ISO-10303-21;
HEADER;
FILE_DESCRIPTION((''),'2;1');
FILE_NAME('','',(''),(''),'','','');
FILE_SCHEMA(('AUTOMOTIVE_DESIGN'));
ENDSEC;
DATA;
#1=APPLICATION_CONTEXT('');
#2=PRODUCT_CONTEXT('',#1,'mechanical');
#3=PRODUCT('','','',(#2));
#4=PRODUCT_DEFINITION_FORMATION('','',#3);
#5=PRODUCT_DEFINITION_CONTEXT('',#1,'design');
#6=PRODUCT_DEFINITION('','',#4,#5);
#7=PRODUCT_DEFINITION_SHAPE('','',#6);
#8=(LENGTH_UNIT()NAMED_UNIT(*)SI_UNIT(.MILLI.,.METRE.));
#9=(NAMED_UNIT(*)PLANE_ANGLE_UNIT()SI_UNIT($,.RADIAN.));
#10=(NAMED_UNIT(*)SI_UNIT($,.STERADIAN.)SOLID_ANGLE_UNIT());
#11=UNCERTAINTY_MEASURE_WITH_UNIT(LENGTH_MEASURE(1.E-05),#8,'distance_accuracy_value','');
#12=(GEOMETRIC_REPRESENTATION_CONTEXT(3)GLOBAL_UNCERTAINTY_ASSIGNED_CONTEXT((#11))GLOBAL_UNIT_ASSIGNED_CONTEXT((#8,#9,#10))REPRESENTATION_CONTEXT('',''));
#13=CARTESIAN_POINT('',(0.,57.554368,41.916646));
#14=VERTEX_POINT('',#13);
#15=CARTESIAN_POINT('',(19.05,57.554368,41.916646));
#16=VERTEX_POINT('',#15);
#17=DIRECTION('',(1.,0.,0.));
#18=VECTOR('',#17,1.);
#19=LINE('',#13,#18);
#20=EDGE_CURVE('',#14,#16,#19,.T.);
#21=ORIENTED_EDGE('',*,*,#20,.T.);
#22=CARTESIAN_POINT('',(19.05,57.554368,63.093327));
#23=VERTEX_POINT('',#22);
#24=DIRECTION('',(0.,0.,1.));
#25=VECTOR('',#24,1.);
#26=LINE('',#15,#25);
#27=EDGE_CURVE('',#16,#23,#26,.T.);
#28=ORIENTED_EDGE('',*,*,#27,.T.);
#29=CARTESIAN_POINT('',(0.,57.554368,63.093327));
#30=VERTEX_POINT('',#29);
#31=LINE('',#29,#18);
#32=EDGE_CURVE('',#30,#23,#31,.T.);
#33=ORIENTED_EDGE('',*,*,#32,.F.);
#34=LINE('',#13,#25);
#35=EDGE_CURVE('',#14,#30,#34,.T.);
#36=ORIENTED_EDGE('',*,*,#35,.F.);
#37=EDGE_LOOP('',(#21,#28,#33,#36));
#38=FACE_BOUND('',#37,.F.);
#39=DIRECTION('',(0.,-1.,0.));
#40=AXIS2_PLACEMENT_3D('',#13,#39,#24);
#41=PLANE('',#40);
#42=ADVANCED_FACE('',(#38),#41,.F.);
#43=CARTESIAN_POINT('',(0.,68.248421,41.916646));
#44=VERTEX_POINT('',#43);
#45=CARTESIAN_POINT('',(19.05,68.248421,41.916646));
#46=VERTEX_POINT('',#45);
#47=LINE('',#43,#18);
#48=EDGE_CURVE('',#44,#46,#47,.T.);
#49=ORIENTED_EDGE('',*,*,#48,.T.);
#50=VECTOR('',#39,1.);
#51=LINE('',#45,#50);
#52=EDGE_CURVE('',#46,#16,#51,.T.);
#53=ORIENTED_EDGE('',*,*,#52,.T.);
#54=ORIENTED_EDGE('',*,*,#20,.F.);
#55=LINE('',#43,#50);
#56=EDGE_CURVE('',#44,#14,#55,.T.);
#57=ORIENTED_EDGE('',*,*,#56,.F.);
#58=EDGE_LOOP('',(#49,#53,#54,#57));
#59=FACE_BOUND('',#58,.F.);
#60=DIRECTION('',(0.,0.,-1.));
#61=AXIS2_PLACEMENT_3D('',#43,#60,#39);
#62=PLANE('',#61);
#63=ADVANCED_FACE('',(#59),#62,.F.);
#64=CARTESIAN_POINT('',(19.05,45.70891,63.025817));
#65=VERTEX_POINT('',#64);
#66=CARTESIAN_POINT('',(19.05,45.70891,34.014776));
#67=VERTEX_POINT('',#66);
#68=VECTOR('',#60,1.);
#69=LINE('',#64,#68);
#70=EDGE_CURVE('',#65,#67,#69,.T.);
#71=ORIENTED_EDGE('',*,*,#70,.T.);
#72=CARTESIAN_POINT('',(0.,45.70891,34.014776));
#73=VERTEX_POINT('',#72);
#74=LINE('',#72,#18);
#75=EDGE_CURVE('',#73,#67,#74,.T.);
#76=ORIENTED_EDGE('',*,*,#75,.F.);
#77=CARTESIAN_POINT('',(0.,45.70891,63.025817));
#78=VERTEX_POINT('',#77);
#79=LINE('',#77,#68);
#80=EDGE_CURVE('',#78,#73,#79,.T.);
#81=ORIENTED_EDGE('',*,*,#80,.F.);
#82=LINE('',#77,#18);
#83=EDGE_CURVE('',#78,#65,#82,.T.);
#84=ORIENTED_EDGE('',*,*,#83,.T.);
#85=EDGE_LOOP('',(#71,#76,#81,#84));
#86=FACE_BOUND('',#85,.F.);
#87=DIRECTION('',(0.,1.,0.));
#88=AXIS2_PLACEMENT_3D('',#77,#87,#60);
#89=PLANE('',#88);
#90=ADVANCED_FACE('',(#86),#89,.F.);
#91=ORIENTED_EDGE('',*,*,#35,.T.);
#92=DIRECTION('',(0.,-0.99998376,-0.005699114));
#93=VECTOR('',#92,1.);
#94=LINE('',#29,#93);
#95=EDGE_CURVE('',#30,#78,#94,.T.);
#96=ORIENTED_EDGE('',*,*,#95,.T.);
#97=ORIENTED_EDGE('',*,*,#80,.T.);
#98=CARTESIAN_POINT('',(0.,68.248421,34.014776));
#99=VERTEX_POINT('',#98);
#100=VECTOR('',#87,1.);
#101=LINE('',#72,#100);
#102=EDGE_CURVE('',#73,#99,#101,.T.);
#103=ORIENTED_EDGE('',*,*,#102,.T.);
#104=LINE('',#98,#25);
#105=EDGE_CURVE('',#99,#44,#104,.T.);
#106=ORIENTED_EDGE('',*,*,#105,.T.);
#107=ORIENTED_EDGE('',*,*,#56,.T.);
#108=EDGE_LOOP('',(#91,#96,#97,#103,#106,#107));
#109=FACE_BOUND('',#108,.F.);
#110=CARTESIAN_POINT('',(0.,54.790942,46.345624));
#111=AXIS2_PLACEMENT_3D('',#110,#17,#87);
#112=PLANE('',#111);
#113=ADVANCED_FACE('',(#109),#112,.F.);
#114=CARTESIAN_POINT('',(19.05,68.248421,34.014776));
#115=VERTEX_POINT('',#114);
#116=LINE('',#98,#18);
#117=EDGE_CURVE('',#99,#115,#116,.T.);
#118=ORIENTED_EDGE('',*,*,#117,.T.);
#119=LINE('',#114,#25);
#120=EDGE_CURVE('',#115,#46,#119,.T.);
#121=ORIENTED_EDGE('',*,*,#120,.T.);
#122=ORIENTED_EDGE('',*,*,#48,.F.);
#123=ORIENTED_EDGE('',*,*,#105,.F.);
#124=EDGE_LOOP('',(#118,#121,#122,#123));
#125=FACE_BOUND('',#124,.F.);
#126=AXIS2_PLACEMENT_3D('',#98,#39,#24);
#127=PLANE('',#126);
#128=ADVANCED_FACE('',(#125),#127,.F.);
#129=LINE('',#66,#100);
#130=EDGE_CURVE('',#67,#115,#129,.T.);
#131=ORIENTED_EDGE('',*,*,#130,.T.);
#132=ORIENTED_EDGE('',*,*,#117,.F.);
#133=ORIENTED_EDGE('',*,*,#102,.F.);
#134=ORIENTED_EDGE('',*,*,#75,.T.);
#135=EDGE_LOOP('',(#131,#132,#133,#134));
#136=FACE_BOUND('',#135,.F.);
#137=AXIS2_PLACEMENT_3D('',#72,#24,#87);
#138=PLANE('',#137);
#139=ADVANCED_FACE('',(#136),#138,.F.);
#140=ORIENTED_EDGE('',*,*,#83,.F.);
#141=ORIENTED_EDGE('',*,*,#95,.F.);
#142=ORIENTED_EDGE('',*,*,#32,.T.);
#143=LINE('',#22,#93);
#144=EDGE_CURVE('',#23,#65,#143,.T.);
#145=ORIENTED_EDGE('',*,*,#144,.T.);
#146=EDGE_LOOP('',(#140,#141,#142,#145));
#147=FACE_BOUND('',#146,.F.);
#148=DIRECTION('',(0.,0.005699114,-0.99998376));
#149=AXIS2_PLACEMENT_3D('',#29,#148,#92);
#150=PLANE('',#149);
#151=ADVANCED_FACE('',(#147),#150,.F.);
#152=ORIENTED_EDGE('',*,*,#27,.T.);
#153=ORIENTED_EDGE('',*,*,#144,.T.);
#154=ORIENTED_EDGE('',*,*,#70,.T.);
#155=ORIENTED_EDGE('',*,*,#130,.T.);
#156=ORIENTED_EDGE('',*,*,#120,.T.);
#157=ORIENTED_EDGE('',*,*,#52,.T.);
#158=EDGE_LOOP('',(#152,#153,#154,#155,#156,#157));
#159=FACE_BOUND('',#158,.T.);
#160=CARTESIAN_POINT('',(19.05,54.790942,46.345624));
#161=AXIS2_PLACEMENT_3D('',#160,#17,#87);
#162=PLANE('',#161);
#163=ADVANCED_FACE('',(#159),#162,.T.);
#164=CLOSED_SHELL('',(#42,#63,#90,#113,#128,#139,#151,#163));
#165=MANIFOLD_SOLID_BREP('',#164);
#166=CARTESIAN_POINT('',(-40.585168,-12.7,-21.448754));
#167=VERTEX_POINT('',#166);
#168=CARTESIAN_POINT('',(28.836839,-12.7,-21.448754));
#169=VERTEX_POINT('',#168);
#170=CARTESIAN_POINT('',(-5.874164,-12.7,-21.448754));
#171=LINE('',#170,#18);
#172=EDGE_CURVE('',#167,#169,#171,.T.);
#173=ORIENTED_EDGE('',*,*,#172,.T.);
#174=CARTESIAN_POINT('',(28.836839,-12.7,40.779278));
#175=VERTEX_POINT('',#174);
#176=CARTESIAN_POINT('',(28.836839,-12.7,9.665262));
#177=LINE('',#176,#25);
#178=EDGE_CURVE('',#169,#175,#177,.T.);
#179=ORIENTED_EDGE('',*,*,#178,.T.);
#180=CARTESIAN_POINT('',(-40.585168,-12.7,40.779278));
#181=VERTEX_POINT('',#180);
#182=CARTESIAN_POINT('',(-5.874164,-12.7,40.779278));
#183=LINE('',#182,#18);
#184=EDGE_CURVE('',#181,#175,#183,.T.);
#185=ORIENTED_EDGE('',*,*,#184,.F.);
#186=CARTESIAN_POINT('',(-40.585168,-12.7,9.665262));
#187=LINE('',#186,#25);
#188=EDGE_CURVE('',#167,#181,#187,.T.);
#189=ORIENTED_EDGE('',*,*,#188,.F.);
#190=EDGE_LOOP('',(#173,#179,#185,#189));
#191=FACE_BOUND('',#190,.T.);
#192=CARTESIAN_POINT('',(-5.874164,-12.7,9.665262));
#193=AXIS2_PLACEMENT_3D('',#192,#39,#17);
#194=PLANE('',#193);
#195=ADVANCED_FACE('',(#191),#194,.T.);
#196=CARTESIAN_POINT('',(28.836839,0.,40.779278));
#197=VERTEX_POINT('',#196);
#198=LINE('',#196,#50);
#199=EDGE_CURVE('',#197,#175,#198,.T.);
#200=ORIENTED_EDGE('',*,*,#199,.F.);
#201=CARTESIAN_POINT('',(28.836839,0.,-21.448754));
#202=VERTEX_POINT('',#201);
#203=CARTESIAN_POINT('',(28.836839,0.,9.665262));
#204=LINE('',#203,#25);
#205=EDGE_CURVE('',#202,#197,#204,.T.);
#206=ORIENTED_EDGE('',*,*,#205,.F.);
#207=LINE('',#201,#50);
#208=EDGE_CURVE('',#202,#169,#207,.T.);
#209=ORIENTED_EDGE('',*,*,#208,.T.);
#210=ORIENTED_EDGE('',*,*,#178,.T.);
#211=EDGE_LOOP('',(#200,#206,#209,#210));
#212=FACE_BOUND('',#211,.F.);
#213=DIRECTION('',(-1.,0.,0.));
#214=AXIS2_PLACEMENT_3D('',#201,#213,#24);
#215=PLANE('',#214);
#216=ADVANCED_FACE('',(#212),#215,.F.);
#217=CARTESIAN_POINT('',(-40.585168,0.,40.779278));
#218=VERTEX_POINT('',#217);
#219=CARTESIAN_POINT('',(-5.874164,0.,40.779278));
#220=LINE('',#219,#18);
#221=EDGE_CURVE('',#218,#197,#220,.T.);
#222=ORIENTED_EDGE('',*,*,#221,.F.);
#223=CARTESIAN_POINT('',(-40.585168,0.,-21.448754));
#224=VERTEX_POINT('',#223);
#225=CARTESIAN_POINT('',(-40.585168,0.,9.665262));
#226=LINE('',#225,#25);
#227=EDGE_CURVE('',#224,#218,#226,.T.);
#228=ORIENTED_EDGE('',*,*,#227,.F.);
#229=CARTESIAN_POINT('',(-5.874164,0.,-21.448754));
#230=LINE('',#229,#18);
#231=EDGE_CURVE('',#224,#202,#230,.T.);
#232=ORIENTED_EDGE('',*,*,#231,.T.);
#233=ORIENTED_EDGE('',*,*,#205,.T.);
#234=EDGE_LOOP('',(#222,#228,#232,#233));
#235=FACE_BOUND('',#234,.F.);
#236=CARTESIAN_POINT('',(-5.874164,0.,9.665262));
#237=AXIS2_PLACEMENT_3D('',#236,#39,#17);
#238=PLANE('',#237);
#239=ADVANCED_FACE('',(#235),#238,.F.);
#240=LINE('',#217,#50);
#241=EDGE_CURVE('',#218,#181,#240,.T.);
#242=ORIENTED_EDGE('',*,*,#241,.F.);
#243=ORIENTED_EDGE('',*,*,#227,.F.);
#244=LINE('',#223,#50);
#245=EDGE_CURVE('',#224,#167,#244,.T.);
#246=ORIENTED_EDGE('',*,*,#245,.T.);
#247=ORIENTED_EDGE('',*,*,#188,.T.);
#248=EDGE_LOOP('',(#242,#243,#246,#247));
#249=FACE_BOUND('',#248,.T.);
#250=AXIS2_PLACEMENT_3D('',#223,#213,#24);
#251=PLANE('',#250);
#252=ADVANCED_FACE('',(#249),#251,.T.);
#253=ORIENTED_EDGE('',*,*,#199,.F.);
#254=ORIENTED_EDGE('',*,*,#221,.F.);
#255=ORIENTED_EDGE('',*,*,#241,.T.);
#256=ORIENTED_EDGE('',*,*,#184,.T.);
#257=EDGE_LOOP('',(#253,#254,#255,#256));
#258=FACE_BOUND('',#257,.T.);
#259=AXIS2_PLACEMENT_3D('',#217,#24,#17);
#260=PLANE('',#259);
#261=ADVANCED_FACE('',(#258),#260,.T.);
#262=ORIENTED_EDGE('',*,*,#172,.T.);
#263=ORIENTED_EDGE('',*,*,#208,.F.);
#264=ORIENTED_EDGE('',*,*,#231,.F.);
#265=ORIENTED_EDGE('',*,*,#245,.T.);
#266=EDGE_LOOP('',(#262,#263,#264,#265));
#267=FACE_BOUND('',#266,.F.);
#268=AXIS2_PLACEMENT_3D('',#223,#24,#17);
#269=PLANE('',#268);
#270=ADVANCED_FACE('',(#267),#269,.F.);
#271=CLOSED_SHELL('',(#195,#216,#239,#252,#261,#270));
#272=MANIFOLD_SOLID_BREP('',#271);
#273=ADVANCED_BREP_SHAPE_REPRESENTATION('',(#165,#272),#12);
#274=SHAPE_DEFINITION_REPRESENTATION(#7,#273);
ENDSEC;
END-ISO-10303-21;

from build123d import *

# Parameters (mm, degrees)
F0_W     = 69.4220066071
F0_H     = 62.2280314565
F3_DEPTH = 12.7
F5_DEPTH = 19.05


# Not quite as in the source:
# - the program builds the solid bodies; features that only make, move or delete a surface that nothing else refers to are left out


with BuildPart() as f3:
    # F0 (on Front) → F3 (new body)
    with BuildSketch(Plane.XZ):
        with Locations((-5.8741644025, 9.6652619541)):
            Rectangle(F0_W, F0_H)
    extrude(amount=F3_DEPTH)


with BuildPart() as f5:
    # F4 (on Right) → F5 (new body)
    with BuildSketch(Plane.YZ):
        Polygon((57.5543679297, 63.0933269858), (45.7089096308, 63.025817275), (45.7089096308, 34.0147763491), (68.2484209538, 34.0147763491), (68.2484209538, 41.9166460633), (57.5543679297, 41.9166460633), align=None)
    extrude(amount=F5_DEPTH)


solid = Compound([f3.part, f5.part])
